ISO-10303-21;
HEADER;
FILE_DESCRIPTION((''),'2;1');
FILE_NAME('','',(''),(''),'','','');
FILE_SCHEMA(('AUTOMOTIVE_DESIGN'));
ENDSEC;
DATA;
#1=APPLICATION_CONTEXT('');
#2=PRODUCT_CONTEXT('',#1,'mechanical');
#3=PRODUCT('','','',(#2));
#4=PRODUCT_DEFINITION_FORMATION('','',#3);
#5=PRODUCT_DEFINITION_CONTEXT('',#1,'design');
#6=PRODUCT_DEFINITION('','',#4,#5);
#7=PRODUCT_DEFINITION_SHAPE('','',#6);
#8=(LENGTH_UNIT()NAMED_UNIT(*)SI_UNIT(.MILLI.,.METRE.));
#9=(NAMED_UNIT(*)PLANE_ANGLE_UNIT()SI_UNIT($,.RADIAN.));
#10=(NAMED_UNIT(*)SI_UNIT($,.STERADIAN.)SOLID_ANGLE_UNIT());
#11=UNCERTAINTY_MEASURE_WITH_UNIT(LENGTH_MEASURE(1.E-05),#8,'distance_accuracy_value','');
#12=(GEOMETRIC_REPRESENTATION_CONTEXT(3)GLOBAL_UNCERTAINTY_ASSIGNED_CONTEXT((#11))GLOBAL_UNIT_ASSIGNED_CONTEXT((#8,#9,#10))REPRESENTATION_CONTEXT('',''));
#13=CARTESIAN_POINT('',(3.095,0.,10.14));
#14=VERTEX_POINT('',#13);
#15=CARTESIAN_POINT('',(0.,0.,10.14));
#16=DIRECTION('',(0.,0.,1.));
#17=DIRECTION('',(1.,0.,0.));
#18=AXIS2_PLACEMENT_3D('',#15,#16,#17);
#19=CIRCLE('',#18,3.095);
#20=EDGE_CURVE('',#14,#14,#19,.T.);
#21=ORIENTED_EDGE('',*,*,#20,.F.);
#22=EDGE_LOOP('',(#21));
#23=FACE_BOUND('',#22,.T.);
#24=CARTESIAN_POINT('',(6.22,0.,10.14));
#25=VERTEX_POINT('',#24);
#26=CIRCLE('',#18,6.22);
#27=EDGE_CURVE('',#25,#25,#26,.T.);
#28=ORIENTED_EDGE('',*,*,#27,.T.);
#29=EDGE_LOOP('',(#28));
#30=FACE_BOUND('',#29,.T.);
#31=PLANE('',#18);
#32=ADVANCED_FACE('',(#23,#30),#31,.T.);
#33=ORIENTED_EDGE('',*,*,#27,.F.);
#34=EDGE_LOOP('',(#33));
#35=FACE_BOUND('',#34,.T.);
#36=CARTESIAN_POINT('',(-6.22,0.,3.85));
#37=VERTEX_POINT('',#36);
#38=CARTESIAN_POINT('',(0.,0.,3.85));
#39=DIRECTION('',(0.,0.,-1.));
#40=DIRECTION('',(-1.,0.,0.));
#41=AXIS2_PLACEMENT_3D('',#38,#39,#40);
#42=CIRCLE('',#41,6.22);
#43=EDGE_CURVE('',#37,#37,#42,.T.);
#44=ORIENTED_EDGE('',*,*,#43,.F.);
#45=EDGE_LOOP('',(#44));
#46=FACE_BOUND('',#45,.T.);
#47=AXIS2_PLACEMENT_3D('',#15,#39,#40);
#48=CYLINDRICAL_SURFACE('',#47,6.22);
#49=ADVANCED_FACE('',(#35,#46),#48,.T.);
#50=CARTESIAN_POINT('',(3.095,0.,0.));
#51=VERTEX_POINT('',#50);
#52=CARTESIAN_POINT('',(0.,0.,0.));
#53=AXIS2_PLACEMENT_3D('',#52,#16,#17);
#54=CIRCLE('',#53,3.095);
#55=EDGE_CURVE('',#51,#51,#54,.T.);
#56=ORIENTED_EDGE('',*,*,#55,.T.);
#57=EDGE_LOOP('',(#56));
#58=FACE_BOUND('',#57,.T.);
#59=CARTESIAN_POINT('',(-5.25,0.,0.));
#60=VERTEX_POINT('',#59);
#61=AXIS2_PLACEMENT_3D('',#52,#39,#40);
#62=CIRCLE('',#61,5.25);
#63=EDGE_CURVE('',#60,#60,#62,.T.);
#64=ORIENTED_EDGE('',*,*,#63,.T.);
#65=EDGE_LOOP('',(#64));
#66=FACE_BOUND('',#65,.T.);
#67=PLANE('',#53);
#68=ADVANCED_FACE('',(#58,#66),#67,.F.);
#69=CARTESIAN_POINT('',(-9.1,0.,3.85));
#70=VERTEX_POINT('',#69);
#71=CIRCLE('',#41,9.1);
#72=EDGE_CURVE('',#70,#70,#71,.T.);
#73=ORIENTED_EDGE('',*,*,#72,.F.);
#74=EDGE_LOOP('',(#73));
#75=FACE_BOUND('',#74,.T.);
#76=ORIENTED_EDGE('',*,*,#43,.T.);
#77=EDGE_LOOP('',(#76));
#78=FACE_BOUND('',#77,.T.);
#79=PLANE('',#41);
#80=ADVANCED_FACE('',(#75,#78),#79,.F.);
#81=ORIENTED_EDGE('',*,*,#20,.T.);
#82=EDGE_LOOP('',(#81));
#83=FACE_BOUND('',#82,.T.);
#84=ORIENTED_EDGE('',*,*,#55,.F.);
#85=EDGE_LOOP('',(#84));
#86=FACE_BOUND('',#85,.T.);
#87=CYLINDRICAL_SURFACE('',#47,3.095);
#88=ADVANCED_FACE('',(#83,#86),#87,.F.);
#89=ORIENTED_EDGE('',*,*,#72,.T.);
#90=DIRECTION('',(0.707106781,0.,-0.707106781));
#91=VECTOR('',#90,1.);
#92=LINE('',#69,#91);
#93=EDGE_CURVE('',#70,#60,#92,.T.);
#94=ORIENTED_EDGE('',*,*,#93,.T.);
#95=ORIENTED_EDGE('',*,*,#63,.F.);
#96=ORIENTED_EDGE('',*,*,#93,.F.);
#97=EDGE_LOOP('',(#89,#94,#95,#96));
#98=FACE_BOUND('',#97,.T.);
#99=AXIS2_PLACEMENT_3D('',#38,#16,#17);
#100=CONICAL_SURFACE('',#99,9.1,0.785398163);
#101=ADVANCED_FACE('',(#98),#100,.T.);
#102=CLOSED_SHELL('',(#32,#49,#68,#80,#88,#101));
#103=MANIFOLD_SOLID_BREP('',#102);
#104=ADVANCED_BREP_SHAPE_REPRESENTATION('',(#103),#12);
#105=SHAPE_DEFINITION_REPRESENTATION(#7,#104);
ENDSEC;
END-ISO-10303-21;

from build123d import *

# Parameters (mm, degrees)
ESQUISSE1_R        = 6.22
ESQUISSE1_R_2      = 3.095
BOSS_EXTRU_1_DEPTH = 10.14
ESQUISSE2_R        = 9.1
ESQUISSE2_R_2      = 6.22
BOSS_EXTRU_2_DEPTH = 3.85


with BuildPart() as part:
    # Esquisse1 → Boss.-Extru.1 (new body)
    with BuildSketch(Plane.XY):
        Circle(ESQUISSE1_R)
        Circle(ESQUISSE1_R_2, mode=Mode.SUBTRACT)
    extrude(amount=BOSS_EXTRU_1_DEPTH)

    # Esquisse2 → Boss.-Extru.2 (add)
    with BuildSketch(Plane(origin=(0, 0, 0), x_dir=(-1, 0, 0), z_dir=(0, 0, -1))):
        Circle(ESQUISSE2_R)
        Circle(ESQUISSE2_R_2, mode=Mode.SUBTRACT)
    extrude(amount=-BOSS_EXTRU_2_DEPTH)

    # Enlèvement de matière-Balayage1: sweep along a curve in space
    with BuildLine() as enl_vement_de_mati_re_balayage1_path:
        ThreePointArc((-9.1, 0, 0), (-6.434671709, 6.434671709, 0), (0, 9.1, 0))
        ThreePointArc((0, 9.1, 0), (6.434671709, 6.434671709, 0), (9.1, 0, 0))
        ThreePointArc((9.1, 0, 0), (6.434671709, -6.434671709, 0), (0, -9.1, 0))
        ThreePointArc((0, -9.1, 0), (-6.434671709, -6.434671709, 0), (-9.1, 0, 0))
    # Esquisse3 → Enlèvement de matière-Balayage1 (sweep, cut)
    with BuildSketch(Plane(origin=(0, 0, 0), x_dir=(1, 0, 0), z_dir=(0, 1, 0))):
        Polygon((-9.1, -3.85), (-5.25, 0), (-9.1, 0), align=None)
    sweep(path=enl_vement_de_mati_re_balayage1_path.line, mode=Mode.SUBTRACT)


solid = part.part
